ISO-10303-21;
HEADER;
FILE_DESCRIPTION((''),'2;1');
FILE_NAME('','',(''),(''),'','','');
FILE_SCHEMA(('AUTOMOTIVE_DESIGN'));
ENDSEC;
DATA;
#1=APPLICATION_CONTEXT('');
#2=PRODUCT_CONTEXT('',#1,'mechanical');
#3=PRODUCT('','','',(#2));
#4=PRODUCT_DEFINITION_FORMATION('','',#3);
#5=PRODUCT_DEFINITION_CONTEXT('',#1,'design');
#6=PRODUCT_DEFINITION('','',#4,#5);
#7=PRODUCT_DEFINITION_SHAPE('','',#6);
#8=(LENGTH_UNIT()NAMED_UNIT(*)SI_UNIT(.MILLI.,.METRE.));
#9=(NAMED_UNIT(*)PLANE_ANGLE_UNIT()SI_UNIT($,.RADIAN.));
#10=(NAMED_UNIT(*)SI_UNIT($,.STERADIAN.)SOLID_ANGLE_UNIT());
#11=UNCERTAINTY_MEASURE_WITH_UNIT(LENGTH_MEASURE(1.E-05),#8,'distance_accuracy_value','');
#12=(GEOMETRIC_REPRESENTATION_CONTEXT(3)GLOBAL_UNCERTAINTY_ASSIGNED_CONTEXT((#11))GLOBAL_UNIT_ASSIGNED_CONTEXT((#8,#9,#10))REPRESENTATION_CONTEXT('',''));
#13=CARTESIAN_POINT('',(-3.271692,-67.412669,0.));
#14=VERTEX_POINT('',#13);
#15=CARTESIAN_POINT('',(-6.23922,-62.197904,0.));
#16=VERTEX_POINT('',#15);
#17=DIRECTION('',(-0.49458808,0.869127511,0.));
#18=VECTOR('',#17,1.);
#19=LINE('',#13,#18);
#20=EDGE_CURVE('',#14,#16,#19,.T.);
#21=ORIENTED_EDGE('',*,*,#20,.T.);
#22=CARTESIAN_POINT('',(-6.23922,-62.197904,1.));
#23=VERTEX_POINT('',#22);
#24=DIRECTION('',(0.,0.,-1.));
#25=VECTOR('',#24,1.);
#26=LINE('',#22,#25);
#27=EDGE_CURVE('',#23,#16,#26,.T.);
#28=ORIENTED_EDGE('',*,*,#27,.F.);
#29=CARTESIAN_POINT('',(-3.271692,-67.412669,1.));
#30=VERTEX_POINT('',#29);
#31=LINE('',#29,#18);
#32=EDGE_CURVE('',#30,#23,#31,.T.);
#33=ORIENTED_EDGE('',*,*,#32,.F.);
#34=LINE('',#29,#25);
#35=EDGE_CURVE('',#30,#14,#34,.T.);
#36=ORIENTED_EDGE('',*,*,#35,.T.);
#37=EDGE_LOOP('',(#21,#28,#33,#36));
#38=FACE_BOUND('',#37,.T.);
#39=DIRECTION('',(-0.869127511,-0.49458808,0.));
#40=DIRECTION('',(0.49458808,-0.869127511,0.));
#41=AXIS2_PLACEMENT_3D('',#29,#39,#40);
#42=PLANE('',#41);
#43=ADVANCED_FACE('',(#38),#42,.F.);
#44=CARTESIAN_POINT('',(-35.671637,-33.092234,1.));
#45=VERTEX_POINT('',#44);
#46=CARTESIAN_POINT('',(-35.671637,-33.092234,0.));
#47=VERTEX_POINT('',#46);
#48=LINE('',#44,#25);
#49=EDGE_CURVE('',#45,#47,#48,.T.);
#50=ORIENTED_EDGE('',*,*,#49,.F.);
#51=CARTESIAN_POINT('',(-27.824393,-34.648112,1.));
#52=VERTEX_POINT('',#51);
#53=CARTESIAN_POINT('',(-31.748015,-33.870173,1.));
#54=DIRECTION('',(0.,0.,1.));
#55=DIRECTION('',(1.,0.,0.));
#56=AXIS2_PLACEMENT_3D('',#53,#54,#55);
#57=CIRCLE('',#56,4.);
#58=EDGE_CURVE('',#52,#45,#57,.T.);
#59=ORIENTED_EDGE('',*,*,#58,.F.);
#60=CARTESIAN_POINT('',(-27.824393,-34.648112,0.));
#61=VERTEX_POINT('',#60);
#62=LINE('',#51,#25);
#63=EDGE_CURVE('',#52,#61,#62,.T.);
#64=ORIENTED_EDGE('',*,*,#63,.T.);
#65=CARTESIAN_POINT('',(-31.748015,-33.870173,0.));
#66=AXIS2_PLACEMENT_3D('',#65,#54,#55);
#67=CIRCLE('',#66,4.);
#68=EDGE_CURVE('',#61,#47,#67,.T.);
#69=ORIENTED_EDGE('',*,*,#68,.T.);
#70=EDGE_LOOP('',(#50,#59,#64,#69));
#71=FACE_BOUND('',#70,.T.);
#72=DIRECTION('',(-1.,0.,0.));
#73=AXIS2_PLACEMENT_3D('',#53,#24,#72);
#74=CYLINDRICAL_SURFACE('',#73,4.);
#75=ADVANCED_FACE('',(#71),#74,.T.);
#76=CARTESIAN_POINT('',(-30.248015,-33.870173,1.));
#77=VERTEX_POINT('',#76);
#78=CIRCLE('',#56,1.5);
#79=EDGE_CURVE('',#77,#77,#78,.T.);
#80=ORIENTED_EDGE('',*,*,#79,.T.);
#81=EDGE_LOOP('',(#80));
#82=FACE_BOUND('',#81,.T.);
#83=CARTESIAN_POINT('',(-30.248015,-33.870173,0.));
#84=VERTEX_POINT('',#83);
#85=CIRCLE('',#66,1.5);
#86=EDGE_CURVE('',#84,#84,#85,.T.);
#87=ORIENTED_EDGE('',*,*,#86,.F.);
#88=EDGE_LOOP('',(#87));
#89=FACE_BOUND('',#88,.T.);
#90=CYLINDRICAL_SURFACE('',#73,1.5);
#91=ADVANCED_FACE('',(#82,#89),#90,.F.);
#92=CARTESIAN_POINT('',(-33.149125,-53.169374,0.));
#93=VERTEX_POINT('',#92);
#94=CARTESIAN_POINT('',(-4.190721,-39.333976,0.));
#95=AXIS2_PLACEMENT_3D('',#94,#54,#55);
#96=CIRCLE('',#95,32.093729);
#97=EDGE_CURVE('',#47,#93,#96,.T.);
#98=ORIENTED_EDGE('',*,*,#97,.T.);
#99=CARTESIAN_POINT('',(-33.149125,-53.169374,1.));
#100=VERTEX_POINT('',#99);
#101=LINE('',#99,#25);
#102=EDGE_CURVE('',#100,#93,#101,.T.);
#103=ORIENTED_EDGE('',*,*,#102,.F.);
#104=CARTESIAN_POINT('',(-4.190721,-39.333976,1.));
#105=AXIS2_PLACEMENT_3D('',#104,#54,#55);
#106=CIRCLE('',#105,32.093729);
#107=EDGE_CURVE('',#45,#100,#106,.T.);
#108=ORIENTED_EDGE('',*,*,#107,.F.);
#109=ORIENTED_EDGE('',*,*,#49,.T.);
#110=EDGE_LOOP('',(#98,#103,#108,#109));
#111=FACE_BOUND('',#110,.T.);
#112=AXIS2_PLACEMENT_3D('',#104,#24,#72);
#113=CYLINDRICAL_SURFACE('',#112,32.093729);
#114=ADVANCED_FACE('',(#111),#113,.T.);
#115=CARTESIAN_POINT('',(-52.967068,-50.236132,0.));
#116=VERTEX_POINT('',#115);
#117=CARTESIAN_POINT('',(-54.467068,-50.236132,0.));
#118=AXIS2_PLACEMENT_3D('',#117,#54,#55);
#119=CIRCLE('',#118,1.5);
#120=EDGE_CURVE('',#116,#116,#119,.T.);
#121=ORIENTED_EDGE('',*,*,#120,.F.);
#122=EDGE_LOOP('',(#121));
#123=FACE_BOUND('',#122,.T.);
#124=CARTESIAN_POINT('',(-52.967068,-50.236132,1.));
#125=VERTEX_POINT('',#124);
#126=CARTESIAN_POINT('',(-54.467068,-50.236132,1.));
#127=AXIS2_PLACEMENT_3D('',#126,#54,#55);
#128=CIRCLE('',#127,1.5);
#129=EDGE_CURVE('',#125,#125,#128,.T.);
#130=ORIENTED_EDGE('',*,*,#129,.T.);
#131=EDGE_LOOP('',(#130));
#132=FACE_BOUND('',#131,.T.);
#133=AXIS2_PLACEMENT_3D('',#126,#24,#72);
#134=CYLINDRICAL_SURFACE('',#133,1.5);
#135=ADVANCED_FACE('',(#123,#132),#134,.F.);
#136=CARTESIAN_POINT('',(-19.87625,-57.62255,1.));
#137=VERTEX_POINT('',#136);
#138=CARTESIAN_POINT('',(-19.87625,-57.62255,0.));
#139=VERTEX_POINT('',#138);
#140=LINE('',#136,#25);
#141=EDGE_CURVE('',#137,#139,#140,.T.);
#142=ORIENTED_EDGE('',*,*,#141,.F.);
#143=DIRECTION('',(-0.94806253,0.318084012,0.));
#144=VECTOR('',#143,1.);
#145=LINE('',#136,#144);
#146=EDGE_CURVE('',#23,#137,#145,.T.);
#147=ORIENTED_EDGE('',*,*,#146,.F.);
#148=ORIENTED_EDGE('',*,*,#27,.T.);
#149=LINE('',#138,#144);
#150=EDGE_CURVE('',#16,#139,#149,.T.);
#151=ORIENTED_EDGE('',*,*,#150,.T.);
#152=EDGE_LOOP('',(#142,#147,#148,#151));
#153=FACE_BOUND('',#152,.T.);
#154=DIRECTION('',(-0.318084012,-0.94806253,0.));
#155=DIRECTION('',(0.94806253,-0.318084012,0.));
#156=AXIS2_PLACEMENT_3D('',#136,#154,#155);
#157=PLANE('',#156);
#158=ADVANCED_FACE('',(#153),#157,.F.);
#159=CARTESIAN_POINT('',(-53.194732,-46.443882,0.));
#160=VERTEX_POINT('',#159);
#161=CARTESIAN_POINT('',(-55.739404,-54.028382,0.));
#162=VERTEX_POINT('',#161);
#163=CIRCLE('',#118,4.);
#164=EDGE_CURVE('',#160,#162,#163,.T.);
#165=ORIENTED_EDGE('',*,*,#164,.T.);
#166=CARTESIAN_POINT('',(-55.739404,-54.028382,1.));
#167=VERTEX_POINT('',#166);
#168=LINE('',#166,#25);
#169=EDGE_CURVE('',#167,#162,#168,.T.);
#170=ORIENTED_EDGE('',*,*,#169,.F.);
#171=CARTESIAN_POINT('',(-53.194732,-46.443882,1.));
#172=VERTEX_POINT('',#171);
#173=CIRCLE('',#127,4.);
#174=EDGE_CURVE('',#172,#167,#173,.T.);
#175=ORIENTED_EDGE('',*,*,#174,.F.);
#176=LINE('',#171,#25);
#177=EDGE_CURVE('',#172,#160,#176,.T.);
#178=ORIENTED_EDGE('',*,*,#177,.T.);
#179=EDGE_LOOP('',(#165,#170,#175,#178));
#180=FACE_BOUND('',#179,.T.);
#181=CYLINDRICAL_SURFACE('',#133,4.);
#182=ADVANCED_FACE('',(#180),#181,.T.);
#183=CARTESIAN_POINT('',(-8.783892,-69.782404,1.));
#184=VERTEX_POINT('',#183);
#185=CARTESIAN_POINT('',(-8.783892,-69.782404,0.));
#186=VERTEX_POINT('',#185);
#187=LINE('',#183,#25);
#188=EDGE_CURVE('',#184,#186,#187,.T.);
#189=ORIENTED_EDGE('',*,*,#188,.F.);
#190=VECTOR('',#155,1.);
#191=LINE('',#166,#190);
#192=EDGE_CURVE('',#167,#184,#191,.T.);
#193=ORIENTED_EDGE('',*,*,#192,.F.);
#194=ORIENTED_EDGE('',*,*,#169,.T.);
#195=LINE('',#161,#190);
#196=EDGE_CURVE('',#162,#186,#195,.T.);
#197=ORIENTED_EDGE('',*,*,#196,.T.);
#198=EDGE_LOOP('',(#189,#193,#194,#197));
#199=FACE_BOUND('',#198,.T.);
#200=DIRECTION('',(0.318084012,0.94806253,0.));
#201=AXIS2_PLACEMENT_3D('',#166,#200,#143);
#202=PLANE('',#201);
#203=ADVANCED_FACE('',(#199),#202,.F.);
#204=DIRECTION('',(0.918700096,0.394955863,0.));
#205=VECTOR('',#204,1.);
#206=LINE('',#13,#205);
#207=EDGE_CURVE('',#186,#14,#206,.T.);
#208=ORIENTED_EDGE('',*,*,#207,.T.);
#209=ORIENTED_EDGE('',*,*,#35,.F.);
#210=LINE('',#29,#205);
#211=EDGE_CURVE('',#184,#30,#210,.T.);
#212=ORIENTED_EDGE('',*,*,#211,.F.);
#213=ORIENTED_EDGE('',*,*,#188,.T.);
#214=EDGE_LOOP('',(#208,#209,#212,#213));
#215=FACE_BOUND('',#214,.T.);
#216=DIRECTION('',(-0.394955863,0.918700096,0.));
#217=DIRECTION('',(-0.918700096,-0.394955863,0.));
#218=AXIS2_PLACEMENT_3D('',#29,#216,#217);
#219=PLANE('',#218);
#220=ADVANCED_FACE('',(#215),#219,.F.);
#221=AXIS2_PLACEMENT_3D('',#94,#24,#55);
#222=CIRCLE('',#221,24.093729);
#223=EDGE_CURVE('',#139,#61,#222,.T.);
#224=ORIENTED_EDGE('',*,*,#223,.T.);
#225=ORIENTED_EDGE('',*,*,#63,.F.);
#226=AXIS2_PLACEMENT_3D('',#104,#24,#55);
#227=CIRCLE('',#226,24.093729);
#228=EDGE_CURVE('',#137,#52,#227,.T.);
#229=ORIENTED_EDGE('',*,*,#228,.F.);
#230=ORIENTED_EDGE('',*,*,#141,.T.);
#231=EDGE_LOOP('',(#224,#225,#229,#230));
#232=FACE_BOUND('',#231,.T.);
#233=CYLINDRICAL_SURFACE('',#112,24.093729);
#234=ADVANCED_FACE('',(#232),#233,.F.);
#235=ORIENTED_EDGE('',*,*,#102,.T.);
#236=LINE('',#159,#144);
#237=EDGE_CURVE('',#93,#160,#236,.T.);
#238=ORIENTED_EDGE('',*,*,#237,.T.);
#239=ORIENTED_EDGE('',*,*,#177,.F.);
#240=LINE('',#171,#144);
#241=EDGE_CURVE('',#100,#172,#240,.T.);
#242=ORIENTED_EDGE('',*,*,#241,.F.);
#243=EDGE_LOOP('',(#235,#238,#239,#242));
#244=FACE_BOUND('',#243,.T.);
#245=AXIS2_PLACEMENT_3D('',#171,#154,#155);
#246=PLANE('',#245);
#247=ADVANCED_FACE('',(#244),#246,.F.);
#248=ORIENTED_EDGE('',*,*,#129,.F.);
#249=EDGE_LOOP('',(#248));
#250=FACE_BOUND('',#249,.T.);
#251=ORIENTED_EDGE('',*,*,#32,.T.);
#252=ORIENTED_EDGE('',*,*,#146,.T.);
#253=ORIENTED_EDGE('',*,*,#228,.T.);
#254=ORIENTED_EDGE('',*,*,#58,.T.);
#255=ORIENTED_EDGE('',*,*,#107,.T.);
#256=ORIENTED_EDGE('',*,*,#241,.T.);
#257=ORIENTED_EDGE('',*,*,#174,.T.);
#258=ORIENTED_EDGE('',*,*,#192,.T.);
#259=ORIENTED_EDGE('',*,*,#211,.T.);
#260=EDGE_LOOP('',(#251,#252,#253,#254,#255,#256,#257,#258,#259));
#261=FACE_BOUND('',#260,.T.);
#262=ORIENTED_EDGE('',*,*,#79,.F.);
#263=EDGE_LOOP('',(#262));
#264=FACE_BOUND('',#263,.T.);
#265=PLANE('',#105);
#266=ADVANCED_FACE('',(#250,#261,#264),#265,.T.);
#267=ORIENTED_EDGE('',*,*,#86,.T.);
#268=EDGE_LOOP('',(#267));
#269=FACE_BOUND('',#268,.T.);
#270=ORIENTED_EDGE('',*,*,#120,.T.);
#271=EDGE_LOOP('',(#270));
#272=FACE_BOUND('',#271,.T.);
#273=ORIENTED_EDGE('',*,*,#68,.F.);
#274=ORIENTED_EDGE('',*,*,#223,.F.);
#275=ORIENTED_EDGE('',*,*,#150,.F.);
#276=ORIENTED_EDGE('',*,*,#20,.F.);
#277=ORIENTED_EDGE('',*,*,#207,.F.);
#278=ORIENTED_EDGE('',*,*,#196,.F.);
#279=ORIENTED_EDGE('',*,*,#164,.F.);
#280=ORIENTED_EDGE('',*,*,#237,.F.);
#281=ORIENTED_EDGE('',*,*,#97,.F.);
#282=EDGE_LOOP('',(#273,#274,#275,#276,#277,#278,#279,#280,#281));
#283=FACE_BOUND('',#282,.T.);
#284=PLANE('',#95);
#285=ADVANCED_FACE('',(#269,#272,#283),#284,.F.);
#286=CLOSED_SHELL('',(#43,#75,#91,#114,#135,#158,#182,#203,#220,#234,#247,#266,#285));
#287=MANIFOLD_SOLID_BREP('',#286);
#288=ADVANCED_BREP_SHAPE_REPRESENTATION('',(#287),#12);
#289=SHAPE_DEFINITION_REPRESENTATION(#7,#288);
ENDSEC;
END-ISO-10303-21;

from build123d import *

# Parameters (mm, degrees)
ESQUISSE1_R               = 1.5
T_LE_DE_BASE_PLI_E1_DEPTH = 1


# Sheet-metal steps are written as plain solids
with BuildPart() as part:
    # Esquisse1 → Tôle de base pliée1 (new body)
    with BuildSketch(Plane.XY):
        with BuildLine():
            Line((-53.194732382, -46.443882138), (-33.149125492, -53.169374239))
            ThreePointArc((-33.149125492, -53.169374239), (-36.034099594, -43.334809734), (-35.67163719, -33.092234102))
            ThreePointArc((-35.67163719, -33.092234102), (-30.970075892, -29.94655113), (-27.82439292, -34.648112428))
            ThreePointArc((-27.82439292, -34.648112428), (-26.960351912, -47.211264855), (-19.876250068, -57.622550405))
            Line((-19.876250068, -57.622550405), (-6.239220274, -62.197903832))
            Line((-6.239220274, -62.197903832), (-3.271691792, -67.412668899))
            Line((-3.271691792, -67.412668899), (-8.783892369, -69.782404075))
            Line((-8.783892369, -69.782404075), (-55.739404477, -54.02838238))
            ThreePointArc((-55.739404477, -54.02838238), (-58.259318551, -48.963796212), (-53.194732382, -46.443882138))
        make_face()
        with Locations((-54.467068429, -50.236132259)):
            Circle(ESQUISSE1_R, mode=Mode.SUBTRACT)
        with Locations((-31.748015055, -33.870173265)):
            Circle(ESQUISSE1_R, mode=Mode.SUBTRACT)
    extrude(amount=T_LE_DE_BASE_PLI_E1_DEPTH)


solid = part.part
